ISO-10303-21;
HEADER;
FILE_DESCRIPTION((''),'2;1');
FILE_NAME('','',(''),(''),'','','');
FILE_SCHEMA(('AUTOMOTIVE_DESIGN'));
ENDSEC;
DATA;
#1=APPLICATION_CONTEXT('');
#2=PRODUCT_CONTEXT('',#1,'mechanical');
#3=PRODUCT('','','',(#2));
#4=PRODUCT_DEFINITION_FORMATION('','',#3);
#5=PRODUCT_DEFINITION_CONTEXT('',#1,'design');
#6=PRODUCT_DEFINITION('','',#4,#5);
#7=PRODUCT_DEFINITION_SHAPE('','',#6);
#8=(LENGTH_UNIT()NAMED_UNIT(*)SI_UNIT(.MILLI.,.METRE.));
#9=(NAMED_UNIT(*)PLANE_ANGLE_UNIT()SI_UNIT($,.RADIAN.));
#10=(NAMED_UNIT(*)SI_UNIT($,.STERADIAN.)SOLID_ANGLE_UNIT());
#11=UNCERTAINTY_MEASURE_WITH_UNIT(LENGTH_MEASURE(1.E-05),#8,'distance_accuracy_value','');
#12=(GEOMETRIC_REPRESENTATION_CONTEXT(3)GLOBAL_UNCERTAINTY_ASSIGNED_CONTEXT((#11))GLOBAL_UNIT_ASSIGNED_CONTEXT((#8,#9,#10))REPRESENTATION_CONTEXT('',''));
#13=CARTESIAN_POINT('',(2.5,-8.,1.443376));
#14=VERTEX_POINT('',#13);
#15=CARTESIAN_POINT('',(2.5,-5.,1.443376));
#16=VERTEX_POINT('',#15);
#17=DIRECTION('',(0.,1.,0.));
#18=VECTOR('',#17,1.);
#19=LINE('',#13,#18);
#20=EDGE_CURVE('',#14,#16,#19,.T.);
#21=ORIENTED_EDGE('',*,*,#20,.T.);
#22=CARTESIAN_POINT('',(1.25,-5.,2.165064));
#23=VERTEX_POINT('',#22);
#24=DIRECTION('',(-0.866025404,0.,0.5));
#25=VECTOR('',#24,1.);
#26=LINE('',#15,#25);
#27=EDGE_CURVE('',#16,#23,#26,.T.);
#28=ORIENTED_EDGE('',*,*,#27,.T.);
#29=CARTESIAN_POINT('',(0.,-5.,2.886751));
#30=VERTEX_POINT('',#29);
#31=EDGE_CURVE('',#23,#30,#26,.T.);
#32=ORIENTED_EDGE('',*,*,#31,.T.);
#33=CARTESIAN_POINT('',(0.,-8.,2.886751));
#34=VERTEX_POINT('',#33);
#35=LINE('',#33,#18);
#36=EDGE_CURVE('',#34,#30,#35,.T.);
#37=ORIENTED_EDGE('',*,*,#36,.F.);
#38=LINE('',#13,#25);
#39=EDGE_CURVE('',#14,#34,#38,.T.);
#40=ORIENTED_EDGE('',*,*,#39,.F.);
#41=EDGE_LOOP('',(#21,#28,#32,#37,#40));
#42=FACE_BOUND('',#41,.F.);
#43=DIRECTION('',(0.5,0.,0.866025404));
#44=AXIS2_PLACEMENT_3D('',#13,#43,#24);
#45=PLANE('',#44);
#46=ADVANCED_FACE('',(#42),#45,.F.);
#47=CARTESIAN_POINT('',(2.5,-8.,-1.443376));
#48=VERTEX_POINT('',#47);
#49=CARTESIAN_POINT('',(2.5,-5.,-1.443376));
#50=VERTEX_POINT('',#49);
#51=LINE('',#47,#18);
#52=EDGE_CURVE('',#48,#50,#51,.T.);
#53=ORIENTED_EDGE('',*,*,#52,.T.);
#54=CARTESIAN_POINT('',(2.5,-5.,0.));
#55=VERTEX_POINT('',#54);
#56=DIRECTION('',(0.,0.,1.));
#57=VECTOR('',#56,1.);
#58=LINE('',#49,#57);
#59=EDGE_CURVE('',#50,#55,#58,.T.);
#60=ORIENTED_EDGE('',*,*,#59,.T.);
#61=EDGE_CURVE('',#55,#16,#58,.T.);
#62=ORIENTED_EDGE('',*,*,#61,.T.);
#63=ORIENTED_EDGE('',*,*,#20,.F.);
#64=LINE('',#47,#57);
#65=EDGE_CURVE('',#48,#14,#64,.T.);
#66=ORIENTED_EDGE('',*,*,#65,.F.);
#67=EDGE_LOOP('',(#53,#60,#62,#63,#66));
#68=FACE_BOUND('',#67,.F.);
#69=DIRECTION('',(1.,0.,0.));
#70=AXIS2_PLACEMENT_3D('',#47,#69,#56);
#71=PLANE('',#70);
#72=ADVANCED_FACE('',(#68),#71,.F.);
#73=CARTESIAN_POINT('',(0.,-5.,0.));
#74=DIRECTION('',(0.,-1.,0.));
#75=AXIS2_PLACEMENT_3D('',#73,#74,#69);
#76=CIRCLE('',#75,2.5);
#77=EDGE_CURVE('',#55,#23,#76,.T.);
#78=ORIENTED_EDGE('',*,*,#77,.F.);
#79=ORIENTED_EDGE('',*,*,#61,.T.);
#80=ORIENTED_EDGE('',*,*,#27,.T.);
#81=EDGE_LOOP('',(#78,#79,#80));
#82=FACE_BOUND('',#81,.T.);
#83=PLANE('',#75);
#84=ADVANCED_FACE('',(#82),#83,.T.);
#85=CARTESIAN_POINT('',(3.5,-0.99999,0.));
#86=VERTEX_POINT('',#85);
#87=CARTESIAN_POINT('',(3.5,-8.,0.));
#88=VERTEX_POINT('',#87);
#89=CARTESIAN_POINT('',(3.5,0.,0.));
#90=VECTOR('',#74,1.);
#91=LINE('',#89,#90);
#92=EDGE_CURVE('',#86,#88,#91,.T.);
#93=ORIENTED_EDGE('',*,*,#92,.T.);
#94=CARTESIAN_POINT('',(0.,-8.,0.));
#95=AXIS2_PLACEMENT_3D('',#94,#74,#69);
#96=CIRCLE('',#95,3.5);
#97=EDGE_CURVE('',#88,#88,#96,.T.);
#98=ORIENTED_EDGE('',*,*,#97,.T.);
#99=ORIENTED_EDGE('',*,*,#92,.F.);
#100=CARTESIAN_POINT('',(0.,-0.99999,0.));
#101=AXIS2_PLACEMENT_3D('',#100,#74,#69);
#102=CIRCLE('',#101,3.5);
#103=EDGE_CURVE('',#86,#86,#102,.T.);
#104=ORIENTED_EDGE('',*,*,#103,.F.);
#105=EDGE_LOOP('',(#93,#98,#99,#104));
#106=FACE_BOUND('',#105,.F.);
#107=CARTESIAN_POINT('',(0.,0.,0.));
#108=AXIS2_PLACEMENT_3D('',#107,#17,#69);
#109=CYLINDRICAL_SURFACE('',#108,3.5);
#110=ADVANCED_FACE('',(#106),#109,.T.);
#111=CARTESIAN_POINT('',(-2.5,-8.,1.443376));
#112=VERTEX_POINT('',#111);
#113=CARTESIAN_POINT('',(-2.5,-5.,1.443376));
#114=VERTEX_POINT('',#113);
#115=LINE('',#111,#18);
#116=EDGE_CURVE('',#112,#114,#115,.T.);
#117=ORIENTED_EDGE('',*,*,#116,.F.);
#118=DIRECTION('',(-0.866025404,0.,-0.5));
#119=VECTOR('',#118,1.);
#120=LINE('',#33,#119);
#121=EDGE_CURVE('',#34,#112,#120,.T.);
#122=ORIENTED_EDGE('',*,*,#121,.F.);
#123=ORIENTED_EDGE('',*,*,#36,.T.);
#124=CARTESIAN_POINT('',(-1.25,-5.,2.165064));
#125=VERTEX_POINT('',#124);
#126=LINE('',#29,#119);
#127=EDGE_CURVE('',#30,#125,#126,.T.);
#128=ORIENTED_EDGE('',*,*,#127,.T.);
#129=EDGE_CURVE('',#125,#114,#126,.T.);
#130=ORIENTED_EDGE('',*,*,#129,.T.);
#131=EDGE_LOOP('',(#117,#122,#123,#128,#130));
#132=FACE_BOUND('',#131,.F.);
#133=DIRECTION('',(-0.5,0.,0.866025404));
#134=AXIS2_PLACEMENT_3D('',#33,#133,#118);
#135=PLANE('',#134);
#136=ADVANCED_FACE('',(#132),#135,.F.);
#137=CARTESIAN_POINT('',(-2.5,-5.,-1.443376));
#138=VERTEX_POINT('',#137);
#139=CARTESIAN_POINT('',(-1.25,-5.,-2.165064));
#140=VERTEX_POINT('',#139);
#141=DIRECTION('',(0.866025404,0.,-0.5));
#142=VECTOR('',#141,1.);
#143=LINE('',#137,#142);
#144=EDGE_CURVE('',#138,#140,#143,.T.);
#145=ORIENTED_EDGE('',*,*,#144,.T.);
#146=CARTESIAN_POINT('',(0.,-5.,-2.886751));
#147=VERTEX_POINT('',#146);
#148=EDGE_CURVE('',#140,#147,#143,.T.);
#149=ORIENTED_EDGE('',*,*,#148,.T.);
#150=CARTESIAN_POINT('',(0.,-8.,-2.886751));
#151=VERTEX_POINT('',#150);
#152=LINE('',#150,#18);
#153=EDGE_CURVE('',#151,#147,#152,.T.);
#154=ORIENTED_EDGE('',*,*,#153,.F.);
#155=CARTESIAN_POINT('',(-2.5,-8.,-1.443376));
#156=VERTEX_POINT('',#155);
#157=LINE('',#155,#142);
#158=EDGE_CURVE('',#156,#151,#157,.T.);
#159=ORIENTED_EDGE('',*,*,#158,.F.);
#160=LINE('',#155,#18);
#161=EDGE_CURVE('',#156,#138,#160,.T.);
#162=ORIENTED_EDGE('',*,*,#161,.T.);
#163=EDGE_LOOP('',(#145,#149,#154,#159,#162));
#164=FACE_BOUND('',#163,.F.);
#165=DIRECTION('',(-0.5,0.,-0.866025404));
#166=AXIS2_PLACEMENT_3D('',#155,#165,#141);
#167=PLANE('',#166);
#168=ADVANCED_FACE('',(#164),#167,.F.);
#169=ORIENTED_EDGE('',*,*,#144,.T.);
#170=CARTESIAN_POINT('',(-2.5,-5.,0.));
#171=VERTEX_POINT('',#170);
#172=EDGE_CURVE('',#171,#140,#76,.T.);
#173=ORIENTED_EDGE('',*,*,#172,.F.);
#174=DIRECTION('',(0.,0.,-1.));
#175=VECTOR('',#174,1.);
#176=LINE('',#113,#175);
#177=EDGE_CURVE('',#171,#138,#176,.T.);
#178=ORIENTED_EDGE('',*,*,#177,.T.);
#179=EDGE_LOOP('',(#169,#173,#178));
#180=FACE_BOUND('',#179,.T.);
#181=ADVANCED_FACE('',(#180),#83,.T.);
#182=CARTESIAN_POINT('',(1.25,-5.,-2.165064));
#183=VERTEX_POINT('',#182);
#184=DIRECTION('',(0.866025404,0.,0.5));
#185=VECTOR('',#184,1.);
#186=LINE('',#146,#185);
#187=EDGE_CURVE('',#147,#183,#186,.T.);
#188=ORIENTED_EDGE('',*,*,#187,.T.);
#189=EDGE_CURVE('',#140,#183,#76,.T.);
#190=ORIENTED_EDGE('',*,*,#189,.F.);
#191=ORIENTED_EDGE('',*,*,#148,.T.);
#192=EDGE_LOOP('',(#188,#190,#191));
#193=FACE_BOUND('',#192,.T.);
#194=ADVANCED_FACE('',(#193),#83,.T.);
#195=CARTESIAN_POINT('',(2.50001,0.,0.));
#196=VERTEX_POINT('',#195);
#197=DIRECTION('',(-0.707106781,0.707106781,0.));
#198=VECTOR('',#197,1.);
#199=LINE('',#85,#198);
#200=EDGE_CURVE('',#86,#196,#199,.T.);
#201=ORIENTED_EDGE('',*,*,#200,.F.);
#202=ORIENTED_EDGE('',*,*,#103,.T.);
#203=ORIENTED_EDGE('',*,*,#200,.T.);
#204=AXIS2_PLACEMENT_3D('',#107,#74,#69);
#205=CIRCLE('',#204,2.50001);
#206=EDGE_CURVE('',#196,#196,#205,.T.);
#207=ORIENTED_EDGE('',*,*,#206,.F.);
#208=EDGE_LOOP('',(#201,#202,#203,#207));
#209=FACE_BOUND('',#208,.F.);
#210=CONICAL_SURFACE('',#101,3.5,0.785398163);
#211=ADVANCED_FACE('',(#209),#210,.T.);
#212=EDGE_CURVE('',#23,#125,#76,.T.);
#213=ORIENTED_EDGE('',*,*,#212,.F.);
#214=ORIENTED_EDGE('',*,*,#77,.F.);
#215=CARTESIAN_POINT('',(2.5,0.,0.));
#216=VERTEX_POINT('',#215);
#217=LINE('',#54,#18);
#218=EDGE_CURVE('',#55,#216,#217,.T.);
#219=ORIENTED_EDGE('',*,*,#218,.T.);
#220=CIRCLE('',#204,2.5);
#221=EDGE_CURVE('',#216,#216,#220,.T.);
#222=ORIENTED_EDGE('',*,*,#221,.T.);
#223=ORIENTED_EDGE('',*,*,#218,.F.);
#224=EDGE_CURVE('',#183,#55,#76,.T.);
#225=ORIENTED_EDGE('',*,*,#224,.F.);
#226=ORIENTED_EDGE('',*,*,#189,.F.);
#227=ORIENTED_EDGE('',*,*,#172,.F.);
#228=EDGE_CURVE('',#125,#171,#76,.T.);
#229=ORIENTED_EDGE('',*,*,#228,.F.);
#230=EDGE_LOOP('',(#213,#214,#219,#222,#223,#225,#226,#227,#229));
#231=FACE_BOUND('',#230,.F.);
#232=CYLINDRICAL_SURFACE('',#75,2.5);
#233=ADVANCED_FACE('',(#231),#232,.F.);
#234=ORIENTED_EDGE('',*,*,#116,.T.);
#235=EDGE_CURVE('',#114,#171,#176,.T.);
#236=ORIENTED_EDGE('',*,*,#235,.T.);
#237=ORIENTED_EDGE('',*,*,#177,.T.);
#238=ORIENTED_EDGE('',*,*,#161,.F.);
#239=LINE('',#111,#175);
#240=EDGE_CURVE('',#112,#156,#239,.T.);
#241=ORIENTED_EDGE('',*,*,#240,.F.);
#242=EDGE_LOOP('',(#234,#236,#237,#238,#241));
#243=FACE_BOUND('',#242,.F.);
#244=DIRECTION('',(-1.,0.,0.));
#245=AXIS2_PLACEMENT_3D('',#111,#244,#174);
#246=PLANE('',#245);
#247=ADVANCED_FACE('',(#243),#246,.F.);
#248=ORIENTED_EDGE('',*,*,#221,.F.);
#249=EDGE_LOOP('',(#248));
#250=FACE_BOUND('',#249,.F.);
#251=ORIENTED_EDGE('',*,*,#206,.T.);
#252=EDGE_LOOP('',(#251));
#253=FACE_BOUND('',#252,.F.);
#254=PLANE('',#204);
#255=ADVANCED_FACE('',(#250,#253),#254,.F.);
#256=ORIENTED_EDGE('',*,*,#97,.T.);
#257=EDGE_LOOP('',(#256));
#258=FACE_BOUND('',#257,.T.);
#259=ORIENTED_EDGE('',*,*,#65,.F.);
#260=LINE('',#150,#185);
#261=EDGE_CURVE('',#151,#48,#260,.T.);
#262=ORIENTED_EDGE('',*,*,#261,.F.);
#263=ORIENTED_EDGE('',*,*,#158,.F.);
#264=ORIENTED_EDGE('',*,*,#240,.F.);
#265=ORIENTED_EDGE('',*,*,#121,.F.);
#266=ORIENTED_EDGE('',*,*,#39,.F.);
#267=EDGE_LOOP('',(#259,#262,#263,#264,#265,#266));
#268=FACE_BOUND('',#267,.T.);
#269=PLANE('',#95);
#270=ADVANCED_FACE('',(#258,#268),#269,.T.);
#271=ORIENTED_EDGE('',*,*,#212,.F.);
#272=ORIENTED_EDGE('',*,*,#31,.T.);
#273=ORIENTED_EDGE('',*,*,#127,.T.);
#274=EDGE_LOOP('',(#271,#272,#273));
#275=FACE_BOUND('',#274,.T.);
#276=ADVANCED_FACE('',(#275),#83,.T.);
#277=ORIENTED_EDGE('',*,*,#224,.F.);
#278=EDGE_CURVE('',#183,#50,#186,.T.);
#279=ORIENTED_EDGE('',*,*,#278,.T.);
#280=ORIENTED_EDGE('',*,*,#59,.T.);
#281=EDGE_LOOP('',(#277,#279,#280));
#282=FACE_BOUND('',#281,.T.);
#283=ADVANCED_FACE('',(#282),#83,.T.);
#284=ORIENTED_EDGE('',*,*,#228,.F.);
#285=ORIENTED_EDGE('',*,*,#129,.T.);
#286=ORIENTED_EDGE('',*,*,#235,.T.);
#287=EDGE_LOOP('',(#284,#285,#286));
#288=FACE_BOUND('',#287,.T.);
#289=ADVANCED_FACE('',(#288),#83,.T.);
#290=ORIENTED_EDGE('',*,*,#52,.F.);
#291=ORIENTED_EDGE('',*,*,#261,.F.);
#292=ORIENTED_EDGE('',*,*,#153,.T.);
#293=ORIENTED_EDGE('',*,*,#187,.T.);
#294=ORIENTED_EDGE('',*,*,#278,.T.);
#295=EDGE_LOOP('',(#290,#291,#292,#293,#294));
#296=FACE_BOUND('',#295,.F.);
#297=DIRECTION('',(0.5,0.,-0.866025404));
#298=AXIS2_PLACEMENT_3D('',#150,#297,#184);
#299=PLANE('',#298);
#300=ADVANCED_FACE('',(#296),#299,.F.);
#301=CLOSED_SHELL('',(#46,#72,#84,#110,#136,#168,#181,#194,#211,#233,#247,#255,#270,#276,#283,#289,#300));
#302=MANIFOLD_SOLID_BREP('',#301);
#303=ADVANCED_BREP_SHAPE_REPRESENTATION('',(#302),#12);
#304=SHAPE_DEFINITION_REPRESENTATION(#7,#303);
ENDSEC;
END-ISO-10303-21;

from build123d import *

# Parameters (mm, degrees)
F0_R     = 3.5
F1_DEPTH = 8
F3_DEPTH = 3
F4_R     = 2.5
F5_DEPTH = 25
F6_SIZE  = 0.99999


# Not quite as in the source:
# - a fillet or chamfer is up to 0.001 mm smaller than in the source, because OpenCascade refuses the exact size


with BuildPart() as f1:
    # F0 (on Front) → F1 (new body)
    with BuildSketch(Plane.XZ):
        Circle(F0_R)
    extrude(amount=F1_DEPTH)

    # F2 (on face) → F3 (cut)
    with BuildSketch(Plane.XZ.offset(8)):
        Polygon((2.5, 1.443375673), (0, 2.8867513459), (-2.5, 1.443375673), (-2.5, -1.443375673), (0, -2.8867513459), (2.5, -1.443375673), align=None)
    extrude(amount=-F3_DEPTH, mode=Mode.SUBTRACT)

    # F4 (on face) → F5 (cut)
    with BuildSketch(Plane.XZ.offset(5)):
        Circle(F4_R)
    extrude(amount=-F5_DEPTH, mode=Mode.SUBTRACT)

    # F6 (size 1 in the source; OpenCascade refuses exactly that, so slightly less here)
    f6_edges = [f1.edges().sort_by_distance(p)[0] for p in [
        (-3.5, 0, 0),
    ]]
    chamfer(f6_edges, length=F6_SIZE)


solid = f1.part
